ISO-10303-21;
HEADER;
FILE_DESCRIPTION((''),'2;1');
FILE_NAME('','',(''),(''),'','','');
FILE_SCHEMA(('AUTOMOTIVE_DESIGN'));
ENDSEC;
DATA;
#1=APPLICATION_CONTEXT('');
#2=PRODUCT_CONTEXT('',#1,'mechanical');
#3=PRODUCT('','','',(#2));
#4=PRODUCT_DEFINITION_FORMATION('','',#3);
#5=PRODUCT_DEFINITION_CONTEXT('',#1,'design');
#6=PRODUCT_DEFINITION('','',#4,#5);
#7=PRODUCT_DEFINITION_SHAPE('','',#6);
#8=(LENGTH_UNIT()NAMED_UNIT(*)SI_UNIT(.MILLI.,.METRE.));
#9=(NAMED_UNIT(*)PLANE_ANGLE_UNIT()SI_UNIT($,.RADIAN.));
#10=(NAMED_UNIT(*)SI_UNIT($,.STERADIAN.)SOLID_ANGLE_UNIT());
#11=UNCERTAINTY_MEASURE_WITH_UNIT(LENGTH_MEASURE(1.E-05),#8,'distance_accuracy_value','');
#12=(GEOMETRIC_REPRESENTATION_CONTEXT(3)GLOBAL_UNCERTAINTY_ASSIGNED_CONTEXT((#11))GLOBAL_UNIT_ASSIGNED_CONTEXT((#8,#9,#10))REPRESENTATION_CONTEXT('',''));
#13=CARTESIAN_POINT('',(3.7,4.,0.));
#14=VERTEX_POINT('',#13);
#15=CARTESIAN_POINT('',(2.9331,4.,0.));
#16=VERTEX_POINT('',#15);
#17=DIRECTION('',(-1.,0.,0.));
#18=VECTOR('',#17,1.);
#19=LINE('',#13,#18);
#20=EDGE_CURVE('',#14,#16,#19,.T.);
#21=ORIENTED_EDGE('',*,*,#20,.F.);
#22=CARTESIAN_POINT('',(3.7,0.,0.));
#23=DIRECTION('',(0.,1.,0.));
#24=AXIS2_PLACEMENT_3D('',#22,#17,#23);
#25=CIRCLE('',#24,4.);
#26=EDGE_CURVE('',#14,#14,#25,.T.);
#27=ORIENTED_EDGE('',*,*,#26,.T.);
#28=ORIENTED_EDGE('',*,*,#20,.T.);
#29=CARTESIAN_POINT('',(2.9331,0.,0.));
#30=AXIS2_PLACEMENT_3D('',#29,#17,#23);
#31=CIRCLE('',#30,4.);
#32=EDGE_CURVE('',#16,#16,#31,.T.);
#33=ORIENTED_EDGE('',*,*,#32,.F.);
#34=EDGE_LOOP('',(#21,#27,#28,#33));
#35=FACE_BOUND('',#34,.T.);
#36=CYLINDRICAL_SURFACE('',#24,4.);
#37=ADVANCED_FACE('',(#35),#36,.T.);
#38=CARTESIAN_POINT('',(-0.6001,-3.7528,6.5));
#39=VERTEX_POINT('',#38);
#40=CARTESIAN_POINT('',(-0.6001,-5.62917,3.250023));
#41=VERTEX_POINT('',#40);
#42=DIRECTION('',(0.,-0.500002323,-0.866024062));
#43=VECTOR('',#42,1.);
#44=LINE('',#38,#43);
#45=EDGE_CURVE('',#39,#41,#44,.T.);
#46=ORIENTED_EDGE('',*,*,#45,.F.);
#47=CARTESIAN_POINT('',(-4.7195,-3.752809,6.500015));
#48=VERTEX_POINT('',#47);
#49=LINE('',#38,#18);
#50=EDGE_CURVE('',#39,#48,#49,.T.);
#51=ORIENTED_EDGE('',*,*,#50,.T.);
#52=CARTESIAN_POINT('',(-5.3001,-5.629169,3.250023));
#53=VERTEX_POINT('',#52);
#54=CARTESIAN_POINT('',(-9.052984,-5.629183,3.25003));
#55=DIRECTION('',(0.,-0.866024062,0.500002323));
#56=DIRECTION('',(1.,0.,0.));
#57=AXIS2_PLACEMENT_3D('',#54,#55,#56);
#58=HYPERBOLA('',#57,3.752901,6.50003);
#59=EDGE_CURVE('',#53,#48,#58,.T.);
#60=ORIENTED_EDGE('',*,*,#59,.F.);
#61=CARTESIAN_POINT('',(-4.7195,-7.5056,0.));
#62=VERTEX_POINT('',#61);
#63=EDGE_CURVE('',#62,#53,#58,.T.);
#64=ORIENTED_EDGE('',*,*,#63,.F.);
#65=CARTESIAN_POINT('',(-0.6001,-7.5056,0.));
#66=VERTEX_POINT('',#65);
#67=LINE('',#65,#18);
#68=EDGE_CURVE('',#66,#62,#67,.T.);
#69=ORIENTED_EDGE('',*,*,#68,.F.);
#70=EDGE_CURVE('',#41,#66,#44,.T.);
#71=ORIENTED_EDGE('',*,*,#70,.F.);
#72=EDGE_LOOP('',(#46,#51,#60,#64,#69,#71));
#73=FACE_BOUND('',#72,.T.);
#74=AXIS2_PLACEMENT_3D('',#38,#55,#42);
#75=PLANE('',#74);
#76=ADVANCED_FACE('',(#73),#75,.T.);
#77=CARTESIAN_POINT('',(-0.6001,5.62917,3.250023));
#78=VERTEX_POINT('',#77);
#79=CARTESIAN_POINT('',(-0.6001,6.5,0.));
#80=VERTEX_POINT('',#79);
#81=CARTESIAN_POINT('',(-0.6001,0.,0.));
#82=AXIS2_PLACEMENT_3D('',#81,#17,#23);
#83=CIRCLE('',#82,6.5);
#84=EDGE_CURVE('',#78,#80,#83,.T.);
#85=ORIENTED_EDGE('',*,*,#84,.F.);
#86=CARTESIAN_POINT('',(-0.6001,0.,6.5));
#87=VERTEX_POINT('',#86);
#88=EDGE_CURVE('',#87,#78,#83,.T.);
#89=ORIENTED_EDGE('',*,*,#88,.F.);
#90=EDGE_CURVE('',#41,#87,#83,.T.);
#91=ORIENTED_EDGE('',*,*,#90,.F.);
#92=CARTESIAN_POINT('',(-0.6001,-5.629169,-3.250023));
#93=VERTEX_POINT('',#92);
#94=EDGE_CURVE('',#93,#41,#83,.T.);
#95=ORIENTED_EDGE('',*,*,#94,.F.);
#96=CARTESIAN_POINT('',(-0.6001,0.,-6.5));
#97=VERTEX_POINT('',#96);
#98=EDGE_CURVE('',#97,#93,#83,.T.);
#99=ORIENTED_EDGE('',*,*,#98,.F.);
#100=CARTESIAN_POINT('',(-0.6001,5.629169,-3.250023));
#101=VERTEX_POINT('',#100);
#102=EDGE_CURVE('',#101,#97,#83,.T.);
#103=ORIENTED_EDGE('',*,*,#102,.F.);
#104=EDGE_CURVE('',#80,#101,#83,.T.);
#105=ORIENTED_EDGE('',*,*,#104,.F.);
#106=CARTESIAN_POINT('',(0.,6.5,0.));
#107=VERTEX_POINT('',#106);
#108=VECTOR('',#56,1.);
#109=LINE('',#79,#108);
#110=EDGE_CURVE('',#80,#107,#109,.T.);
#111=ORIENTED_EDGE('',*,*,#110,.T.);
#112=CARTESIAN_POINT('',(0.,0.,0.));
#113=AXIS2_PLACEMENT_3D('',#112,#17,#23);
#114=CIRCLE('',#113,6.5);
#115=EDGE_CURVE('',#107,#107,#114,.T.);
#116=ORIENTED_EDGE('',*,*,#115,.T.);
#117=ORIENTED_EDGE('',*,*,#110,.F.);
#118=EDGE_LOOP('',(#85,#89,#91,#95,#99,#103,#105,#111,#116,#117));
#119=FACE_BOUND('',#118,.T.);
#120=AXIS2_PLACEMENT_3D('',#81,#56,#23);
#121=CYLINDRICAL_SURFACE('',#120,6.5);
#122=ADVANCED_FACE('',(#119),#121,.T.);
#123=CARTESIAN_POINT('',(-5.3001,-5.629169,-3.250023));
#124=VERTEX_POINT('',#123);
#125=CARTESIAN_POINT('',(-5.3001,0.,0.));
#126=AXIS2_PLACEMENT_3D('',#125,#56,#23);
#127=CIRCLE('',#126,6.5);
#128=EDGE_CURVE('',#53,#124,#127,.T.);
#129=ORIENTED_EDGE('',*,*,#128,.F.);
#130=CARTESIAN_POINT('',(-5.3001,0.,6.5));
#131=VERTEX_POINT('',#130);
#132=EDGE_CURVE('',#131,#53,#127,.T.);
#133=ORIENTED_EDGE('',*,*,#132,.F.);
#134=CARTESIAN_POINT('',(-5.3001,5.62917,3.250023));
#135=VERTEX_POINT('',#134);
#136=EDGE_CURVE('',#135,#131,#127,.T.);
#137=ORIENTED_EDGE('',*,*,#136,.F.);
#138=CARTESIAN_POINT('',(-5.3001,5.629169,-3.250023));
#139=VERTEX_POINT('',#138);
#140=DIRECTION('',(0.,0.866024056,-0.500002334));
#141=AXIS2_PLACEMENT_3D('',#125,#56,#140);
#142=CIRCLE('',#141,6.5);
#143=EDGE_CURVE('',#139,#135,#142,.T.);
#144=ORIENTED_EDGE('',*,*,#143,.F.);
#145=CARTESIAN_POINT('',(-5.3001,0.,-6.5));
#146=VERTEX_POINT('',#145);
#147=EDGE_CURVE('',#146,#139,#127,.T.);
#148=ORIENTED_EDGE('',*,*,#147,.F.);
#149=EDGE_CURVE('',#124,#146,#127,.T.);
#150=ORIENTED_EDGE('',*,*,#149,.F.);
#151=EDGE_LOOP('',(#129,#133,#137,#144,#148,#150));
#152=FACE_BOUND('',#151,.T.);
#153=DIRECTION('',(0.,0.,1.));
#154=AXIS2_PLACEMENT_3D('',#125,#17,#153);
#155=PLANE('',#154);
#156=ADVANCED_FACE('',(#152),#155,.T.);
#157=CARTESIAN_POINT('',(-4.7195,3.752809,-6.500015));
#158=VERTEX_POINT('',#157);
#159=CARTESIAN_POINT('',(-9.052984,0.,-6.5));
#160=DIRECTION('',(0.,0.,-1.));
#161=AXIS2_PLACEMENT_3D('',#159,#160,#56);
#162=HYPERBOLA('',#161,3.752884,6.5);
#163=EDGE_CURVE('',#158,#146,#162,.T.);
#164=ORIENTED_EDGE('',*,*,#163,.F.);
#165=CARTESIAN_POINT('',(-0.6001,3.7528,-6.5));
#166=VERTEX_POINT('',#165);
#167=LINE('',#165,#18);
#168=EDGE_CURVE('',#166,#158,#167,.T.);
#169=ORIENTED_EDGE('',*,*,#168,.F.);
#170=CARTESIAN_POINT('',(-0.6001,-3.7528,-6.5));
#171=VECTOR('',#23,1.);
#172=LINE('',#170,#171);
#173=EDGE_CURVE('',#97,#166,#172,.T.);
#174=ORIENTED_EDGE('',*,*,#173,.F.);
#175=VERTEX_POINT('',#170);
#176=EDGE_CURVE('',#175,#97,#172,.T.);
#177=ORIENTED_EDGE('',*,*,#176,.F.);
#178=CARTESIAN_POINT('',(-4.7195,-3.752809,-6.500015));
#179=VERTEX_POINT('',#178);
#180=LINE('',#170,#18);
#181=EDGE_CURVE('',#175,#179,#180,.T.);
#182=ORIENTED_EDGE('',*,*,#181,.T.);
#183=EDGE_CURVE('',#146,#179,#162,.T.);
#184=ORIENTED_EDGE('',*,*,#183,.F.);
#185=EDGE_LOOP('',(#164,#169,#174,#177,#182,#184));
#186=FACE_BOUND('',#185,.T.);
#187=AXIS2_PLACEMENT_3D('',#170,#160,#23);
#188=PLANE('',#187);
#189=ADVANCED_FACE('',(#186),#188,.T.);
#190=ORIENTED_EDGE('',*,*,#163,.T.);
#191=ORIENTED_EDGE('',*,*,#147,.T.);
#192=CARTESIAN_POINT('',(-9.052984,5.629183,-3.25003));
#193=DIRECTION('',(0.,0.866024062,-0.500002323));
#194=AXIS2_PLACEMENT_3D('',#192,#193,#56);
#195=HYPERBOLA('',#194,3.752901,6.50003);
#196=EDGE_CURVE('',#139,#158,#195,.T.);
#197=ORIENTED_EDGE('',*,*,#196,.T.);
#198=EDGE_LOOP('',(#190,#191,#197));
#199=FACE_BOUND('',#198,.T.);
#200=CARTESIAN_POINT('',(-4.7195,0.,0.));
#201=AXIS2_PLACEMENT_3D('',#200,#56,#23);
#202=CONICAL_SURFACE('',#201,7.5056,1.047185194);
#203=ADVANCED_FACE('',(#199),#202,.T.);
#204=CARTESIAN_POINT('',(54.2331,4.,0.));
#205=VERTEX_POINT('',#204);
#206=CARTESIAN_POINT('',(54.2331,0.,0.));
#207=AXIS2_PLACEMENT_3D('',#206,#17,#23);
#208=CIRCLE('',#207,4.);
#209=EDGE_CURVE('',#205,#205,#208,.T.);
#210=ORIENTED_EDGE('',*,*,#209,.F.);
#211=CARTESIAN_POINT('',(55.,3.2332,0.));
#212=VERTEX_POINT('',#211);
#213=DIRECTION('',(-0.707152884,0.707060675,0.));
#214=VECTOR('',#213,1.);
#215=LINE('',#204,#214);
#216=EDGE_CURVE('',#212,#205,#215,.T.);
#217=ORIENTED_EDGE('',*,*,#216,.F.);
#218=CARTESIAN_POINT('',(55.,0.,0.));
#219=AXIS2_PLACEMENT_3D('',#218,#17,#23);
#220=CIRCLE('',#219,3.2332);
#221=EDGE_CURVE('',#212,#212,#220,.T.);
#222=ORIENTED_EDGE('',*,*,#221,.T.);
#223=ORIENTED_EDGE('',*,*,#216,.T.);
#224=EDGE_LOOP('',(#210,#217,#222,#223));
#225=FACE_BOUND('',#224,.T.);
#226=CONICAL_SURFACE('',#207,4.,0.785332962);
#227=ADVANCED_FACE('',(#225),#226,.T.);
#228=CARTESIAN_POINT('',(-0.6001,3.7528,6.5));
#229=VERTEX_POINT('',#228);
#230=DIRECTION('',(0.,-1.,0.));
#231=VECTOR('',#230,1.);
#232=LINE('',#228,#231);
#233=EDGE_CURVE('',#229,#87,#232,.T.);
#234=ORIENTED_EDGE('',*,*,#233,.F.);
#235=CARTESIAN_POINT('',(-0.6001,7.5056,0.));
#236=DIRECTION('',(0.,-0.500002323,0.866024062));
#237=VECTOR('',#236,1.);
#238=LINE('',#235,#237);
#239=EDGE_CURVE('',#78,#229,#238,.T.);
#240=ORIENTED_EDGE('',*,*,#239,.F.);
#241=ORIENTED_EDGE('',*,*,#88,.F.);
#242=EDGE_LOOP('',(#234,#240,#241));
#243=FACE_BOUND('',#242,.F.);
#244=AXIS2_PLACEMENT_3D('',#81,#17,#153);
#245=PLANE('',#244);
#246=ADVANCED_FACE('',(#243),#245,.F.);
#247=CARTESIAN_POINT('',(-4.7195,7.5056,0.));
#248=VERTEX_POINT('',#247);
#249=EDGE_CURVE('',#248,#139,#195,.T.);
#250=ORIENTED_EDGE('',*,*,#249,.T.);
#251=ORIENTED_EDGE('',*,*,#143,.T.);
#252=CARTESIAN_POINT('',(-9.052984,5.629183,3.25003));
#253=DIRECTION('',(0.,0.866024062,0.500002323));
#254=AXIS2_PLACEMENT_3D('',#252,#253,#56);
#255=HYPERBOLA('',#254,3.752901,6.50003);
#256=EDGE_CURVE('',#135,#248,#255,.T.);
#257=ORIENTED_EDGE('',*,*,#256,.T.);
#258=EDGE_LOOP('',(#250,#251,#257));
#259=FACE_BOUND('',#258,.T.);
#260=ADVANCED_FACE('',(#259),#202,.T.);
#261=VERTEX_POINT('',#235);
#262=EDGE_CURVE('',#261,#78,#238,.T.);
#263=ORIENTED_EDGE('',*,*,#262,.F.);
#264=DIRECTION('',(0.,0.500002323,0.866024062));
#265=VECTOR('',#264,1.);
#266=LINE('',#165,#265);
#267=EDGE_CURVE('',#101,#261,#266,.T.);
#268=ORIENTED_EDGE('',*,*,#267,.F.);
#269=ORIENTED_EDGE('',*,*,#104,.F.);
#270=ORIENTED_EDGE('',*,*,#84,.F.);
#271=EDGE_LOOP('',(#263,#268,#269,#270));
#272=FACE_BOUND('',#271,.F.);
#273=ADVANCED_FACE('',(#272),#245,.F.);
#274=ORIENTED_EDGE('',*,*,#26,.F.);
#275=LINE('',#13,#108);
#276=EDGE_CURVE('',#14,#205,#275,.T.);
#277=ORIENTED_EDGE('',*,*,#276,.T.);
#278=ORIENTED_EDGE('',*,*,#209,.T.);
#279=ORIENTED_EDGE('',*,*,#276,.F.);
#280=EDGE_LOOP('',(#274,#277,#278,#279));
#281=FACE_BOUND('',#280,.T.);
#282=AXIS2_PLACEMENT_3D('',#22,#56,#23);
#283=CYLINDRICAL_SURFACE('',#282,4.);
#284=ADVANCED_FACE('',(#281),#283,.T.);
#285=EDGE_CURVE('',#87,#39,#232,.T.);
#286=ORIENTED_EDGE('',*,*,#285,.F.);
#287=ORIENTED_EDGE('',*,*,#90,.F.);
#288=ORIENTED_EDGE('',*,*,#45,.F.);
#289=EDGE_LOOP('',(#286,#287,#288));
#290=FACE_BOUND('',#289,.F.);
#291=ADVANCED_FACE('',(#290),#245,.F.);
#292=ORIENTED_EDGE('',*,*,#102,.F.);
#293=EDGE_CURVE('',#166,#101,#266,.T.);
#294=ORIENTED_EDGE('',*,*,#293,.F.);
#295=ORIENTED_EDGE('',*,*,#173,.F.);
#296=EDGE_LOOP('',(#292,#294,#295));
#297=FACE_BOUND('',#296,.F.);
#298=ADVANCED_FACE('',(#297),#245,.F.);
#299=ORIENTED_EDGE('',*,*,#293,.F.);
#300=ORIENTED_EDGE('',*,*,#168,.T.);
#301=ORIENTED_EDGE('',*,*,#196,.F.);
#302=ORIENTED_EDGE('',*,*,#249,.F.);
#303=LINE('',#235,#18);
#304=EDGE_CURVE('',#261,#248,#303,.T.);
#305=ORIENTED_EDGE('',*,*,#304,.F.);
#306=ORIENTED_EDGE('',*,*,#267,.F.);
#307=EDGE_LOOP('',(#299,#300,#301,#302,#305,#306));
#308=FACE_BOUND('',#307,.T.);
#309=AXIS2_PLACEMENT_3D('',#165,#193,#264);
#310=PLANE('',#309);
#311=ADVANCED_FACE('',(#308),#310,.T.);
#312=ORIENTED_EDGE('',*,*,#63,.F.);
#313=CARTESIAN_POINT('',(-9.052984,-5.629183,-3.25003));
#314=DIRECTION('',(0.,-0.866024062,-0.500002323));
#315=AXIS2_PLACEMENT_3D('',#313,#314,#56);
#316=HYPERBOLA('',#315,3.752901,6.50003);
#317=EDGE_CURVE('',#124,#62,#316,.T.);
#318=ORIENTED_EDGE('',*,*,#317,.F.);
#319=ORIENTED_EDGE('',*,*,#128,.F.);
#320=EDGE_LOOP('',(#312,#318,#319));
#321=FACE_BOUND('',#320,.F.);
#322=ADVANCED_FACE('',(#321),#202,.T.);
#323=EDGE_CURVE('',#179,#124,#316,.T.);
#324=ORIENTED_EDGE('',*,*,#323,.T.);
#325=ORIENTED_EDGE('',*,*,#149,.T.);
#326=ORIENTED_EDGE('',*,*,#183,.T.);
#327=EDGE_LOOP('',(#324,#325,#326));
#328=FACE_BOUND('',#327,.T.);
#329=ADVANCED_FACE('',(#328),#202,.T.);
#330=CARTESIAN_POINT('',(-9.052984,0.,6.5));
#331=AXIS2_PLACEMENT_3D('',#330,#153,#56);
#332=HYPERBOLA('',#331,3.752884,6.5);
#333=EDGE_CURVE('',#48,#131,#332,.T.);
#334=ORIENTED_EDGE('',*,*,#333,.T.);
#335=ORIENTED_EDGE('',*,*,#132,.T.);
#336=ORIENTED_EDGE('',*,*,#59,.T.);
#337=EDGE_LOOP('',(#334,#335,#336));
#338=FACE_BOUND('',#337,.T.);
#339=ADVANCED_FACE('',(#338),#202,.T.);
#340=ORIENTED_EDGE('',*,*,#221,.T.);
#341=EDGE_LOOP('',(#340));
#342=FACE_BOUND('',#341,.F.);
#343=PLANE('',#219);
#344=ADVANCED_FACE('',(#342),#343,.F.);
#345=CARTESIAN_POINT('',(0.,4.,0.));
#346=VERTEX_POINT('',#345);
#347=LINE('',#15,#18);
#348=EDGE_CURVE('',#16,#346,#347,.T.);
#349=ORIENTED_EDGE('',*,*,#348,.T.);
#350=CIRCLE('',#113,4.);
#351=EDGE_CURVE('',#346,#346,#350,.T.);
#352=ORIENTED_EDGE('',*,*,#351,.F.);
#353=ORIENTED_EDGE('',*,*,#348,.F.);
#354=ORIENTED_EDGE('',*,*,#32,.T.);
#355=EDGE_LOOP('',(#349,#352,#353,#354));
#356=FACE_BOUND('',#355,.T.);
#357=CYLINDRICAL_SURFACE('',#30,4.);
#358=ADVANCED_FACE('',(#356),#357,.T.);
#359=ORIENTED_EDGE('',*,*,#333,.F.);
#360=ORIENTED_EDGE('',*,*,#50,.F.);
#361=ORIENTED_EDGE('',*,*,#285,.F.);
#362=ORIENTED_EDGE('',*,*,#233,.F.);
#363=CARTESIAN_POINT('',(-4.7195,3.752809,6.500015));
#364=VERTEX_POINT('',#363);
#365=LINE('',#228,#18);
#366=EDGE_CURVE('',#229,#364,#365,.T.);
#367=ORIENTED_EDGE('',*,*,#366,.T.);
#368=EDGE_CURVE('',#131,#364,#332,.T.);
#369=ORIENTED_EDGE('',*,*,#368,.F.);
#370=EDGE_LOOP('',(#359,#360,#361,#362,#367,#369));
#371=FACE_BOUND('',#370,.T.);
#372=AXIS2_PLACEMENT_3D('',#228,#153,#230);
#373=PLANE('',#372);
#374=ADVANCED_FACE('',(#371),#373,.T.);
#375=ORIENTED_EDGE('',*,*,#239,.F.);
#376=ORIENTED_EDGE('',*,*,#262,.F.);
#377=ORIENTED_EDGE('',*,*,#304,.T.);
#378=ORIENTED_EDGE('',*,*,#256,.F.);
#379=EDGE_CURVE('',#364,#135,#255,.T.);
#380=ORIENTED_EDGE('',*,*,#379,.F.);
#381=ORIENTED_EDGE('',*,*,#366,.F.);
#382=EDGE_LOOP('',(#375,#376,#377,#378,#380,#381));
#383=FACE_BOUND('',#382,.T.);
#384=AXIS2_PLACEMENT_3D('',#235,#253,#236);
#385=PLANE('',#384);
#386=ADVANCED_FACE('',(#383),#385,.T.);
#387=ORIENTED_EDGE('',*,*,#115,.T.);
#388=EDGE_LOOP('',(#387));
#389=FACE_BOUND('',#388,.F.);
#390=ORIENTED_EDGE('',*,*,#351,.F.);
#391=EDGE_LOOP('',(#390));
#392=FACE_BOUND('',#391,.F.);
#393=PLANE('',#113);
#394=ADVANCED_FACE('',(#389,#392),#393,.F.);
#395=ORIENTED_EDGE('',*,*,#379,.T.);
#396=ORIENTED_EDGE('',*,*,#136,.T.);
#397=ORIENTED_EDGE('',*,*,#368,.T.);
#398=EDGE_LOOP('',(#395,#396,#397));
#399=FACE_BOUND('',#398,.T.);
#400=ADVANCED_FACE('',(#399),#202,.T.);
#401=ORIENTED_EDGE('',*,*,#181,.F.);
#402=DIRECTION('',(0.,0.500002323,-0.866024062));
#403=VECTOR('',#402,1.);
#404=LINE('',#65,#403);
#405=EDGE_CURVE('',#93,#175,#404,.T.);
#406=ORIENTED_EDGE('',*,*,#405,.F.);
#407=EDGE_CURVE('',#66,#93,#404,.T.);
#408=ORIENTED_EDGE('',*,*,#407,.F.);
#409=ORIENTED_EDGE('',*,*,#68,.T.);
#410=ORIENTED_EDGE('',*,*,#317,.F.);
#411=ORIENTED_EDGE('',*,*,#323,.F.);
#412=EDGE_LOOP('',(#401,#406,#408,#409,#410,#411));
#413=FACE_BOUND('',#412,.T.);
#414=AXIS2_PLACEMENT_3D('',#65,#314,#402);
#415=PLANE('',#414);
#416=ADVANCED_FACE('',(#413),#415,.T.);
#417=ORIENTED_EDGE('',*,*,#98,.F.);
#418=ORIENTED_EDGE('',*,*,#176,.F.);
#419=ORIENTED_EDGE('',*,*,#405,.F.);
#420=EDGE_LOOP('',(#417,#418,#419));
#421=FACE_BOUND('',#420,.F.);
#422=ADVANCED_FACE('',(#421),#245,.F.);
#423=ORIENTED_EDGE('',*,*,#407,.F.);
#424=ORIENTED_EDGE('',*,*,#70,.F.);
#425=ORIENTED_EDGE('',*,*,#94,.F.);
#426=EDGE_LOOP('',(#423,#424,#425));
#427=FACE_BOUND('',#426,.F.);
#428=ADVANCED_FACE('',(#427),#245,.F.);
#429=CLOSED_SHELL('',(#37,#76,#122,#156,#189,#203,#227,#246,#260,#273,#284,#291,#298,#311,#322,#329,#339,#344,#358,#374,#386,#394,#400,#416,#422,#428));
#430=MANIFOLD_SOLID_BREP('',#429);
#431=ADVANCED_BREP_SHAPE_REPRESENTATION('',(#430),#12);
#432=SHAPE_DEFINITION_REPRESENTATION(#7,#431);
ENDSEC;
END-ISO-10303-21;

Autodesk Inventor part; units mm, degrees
ref_plane "YZ Plane" through (0, 0, 0) normal (1, 0, 0) x (0, 1, 0)
ref_plane "XZ Plane" through (0, 0, 0) normal (0, 1, 0) x (-1, 0, 0)
sketch "Sketch1" plane through (0, 0, 0) normal (0, 0, 1) x (1, 0, 0)
  line L0 (0, 6.5) -> (0, 4)
  line L1 (3.7, 4) -> (55, 4)
  line L2 (55, 4) -> (55, 0)
  line L3 (55, 0) -> (-0.6001, 0)
  line L4 (-11.7201, 0) -> (66.12, 0) projected
  line L5 (-0.6001, 0) -> (-0.6001, 6.5)
  line L6 (-0.6001, 6.5) -> (0, 6.5)
  line L7 (3.7, 4) -> (2.9331, 4)
  line L8 (2.9331, 4) -> (0, 4)
  line L9 (0, -1.3) -> (0, 7.8) projected
  dimension "d0" = 55
  dimension "d1" = 51.3
  dimension "d2" = 8
  dimension "d9" = 0.6001
  dimension "d10" = 13
  dimension "d13" = 0.7669
  dimension "d14" = 8
revolve "Body" add sketch "Sketch1" angle 360 about axis through (55, 0, 0) along (-1, 0, 0)
sketch "Sketch2" plane through (-0.6001, 0, 0) normal (-1, 0, 0) x (0, 0, 1)
  line L0 (0, 7.5056) -> (6.5, 3.7528)
  line L1 (6.5, 3.7528) -> (6.5, -3.7528)
  line L2 (6.5, -3.7528) -> (0, -7.5056)
  line L3 (0, -7.5056) -> (-6.5, -3.7528)
  line L4 (-6.5, -3.7528) -> (-6.5, 3.7528)
  line L5 (-6.5, 3.7528) -> (0, 7.5056)
  point P0 (0, 0)
  point P1 (0, 0)
  dimension "d11" = 13
extrude "Head" add sketch "Sketch2" along normal blind 4.7
sketch "Sketch4" plane through (0, 0, 0) normal (0, 0, 1) x (1, 0, 0)
  line L0 (-5.3001, 6.5) -> (-5.3001, 7.5056)
  line L1 (-5.3001, 7.5056) -> (-4.7195, 7.5056)
  line L2 (-4.7195, 7.5056) -> (-5.3001, 6.5)
  line L3 (-6.2401, 0) -> (0.3399, 0) projected
  line L4 (-0.6001, 7.5056) -> (-5.3001, 7.5056) projected
  line L5 (-5.3001, 3.7528) -> (-5.3001, 7.5056) projected
  dimension "d5" = 30
  dimension "d19" = 13
revolve "Chamfer1" cut sketch "Sketch4" angle 360 about axis through (-10, 0, 0) along (1, 0, 0)
thread "Thread" size "M8x1.25" class "6g" standard "ISO Metric profile" length 51.3
chamfer "Chamfer2" distance 0.7668 distance2 0.7669 1 edges at (55, -4, 0) measured on face at (55, -1.1806, 1.575)
ref_plane "Work Plane1" through (1.525, 0, 0) normal (0, 0, 1) x (1, 0, 0)
equation "\"d11\" = SW"
equation "\"d3\" = KOH - SD"
equation "\"d15\" = GEL"
equation "\"d6\" = -0.5 * SPD + 0.5 * GD"
equation "\"d0\" = NLG"
equation "\"d1\" = GEL"
equation "\"d2\" = GD"
equation "\"d10\" = SD2"
equation "\"d14\" = BDM"
equation "\"d5\" = ANG1"
equation "\"d19\" = SW0"
equation "\"NLG\" = 55"
equation "\"GD\" = NND"
equation "\"BDM\" = NND"
equation "\"KOH\" = 5.3"
equation "\"GEL\" = 51.3"
equation "\"SW\" = 13"
equation "\"SW0\" = SW"
equation "\"SPD\" = NND - 1.2269 * PTC"
equation "\"SD2\" = SW"
equation "\"SD\" = 0.6"
equation "\"ANG1\" = 30deg"
equation "\"GAL\" = 0.61345 * PTC"
equation "\"GUL\" = 0.61345 * PTC"
equation "\"RR\" = 0.4"
equation "\"WFT\" = SD"
equation "\"GD1\" = THREADDIA - 1.2269 * PTC"
equation "\"THREADDIA\" = 8"
equation "\"SDH\" = SW"
equation "\"TOA\" = 30deg"
equation "\"FAWI\" = 45deg"
equation "\"PTC\" = 1.25"
equation "\"NND\" = 8"
equation "\"E0\" = 1.155 * SW"
properties part number "AS 1110 - M8 x 55" material "Steel, Mild"
